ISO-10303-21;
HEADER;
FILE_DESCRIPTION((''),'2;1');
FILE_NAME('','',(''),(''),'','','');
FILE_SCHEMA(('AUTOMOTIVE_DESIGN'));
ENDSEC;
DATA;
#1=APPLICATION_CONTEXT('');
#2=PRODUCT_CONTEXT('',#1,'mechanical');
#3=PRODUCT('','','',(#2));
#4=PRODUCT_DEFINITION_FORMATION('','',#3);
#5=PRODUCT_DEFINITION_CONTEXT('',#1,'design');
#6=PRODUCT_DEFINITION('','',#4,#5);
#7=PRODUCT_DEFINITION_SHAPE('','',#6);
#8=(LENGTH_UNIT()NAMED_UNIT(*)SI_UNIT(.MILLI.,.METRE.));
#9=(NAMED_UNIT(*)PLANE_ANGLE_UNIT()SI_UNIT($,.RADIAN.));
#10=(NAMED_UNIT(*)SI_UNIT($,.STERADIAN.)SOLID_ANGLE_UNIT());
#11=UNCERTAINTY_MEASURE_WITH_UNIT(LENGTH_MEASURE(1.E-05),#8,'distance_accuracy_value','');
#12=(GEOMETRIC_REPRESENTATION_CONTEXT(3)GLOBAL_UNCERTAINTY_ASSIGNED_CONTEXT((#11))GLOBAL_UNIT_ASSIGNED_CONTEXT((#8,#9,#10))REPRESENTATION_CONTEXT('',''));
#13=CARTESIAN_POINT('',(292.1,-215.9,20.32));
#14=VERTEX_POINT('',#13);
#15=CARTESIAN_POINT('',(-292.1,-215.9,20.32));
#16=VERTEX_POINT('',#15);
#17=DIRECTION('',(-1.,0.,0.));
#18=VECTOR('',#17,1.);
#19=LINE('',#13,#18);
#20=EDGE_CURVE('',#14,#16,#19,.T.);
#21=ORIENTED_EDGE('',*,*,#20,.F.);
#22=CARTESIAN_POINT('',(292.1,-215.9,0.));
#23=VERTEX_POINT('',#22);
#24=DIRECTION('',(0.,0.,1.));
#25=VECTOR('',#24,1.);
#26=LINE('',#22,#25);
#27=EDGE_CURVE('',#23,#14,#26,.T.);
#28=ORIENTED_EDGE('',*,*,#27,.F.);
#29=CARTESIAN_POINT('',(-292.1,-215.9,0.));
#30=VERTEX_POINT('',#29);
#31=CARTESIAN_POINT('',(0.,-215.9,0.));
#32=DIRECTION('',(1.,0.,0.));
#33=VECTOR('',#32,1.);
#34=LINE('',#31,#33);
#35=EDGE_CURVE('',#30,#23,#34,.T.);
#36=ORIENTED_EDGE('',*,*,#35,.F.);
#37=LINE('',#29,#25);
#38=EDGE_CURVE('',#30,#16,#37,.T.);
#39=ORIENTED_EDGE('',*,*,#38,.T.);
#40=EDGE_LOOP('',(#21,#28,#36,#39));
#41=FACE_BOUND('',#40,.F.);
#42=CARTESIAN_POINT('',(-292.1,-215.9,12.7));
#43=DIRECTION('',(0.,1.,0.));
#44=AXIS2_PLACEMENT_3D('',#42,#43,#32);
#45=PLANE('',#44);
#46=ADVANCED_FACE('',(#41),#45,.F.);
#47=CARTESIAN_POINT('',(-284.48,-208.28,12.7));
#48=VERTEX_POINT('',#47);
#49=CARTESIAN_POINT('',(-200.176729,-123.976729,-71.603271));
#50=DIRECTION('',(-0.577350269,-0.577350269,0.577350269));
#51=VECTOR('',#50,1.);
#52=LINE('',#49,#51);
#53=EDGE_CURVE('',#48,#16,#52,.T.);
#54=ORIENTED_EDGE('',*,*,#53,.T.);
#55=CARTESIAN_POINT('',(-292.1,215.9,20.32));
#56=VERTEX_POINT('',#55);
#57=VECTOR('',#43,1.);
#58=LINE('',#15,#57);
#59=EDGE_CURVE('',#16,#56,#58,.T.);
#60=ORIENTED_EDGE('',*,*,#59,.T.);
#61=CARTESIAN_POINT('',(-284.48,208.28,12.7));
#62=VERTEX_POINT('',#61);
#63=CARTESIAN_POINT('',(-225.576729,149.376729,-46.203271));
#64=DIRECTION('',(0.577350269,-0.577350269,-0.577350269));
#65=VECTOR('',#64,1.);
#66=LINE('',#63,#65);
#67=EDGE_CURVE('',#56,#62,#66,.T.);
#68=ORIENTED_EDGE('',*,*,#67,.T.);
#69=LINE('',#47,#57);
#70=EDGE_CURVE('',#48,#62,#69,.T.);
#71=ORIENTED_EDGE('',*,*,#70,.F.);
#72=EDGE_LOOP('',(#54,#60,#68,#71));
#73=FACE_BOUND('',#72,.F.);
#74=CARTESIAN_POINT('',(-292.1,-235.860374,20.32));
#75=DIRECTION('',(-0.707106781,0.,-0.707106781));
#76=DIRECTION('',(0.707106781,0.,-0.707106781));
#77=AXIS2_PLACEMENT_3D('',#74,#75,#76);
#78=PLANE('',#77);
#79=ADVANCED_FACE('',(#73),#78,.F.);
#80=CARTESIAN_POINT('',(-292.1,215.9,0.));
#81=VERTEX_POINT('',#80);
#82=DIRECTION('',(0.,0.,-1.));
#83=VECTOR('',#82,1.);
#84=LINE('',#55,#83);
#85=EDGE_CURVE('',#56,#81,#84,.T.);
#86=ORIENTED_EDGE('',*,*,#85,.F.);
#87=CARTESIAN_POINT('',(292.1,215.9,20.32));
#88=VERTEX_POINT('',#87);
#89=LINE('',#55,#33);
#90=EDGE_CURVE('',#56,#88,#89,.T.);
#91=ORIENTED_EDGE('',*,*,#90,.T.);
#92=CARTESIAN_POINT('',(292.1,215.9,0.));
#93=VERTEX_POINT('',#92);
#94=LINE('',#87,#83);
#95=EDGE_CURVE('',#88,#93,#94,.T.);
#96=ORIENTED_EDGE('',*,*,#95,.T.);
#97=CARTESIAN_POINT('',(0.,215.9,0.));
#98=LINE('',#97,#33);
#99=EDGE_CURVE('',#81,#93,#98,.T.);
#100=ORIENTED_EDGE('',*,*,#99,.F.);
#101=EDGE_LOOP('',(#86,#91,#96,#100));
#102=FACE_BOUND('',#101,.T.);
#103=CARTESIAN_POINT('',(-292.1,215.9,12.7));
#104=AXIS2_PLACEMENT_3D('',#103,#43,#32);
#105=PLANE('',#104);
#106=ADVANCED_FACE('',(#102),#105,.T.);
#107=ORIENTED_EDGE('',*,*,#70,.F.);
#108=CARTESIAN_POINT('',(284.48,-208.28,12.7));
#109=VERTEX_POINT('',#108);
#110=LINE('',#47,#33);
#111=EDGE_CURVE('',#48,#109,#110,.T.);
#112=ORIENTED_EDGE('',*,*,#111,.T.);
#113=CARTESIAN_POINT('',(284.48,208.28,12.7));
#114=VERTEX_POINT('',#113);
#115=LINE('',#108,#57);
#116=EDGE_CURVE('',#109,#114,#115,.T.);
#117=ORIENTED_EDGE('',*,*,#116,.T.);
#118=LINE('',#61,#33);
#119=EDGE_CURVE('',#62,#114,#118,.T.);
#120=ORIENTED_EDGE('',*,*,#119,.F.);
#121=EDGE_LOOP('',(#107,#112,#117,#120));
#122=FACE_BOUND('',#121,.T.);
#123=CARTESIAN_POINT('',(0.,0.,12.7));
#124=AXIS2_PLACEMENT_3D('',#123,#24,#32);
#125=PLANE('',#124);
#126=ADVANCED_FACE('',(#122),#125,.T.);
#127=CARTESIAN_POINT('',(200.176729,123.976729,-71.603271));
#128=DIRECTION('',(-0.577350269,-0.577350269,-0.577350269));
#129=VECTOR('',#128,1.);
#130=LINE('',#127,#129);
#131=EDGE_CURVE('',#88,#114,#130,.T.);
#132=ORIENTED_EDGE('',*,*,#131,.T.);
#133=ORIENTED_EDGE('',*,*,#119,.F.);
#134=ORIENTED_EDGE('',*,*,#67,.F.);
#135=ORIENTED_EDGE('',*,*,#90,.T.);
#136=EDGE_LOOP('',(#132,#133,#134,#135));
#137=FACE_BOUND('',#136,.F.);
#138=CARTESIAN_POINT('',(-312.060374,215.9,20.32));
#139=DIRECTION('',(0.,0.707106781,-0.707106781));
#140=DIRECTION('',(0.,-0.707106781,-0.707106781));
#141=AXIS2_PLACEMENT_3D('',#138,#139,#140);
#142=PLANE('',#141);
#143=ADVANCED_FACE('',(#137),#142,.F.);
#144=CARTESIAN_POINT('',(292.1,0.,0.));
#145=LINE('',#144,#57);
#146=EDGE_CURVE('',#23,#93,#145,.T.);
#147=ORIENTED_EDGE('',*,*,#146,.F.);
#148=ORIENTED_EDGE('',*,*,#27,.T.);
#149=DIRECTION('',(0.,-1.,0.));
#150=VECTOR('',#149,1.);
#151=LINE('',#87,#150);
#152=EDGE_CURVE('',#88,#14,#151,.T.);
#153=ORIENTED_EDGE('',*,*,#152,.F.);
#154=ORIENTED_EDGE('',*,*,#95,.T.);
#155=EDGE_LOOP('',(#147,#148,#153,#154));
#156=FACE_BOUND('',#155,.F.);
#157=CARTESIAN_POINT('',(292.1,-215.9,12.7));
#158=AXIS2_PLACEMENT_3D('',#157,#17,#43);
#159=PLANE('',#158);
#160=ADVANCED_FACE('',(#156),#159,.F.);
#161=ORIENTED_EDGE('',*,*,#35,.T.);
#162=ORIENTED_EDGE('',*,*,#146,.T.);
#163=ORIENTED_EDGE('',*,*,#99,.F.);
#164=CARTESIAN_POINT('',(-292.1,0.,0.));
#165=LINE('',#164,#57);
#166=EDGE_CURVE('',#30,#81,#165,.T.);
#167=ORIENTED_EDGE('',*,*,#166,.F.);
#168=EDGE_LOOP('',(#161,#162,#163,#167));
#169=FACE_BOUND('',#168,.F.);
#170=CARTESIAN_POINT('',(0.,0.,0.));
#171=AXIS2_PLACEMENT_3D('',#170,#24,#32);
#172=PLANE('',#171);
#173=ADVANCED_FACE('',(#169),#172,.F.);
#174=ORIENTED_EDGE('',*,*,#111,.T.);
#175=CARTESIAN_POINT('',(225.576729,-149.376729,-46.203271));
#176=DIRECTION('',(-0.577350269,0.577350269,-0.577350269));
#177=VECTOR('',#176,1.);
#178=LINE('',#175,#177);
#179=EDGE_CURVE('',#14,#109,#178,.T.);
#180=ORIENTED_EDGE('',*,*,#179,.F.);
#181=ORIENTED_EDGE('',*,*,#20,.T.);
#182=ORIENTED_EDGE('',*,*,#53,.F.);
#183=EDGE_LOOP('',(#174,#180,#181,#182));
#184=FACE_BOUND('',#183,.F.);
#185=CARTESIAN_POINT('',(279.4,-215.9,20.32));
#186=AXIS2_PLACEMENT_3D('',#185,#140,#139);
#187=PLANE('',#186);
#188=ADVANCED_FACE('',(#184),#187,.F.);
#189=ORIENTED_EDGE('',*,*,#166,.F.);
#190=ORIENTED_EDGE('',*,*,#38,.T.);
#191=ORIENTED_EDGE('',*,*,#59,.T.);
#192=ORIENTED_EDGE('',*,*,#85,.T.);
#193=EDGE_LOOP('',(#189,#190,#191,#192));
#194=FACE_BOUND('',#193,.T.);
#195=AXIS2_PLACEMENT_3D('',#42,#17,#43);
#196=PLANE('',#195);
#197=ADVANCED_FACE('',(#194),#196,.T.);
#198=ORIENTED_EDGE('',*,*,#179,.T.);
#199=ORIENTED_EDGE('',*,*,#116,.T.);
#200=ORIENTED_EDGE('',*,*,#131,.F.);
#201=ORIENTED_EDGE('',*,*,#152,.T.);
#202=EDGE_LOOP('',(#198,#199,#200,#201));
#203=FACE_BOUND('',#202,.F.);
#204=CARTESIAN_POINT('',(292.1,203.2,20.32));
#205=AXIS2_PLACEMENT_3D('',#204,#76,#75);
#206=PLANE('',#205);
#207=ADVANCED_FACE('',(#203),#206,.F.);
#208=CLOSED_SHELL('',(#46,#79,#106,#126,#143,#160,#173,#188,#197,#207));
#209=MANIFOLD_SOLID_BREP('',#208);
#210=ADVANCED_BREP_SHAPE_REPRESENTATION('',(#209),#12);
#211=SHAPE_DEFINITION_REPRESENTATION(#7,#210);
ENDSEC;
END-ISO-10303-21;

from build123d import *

# Parameters (mm, degrees)
F0_W         = 584.2
F0_H         = 431.8
F1_DEPTH     = 12.7
F2_W         = 584.2
F2_H         = 431.8
F2_W_2       = 558.8
F2_H_2       = 406.4
F3_DEPTH     = 7.62
F4_T4_DEPTH  = 558.8
F4_T9_DEPTH  = 406.4
F4_T14_DEPTH = 558.8
F4_T19_DEPTH = 406.4
F4_T25_DEPTH = 439.0603739472
F4_T31_DEPTH = 591.4603739472
F4_T40_DEPTH = 591.4603739472
F4_T46_DEPTH = 439.0603739472
F4_T55_DEPTH = 439.0603739472
F4_T61_DEPTH = 591.4603739472
F4_T70_DEPTH = 439.0603739472
F4_T76_DEPTH = 591.4603739472


# Not quite as in the source:
# - a fillet or chamfer that OpenCascade refuses, or shapes differently, is made with other operations: its cross-section is extruded or revolved along the edge and cut away or added


with BuildPart() as f1:
    # F0 (on Top) → F1 (new body)
    with BuildSketch(Plane.XY):
        Rectangle(F0_W, F0_H)
    extrude(amount=F1_DEPTH)

    # F2 (on face) → F3 (join)
    with BuildSketch(Plane.XY.offset(12.7)):
        Rectangle(F2_W, F2_H)
        Rectangle(F2_W_2, F2_H_2, mode=Mode.SUBTRACT)
    extrude(amount=F3_DEPTH)

    # F4: chamfer of 12.7 on 4 edges, made by hand


with BuildPart() as f4_tool2:
    # F4_s3 → F4_t4 (new body)
    with BuildSketch(Plane.YZ.offset(-279.4)):
        Polygon((215.9, 20.32), (203.2, 7.62), (203.2, 20.32), align=None)
    extrude(amount=F4_T4_DEPTH)

    split(bisect_by=Plane.XY.offset(12.7), keep=Keep.TOP)


with BuildPart() as f1_1:
    add(f1.part)

    # F4_t1: cut F4_tool2
    add(f4_tool2.part, mode=Mode.SUBTRACT)


with BuildPart() as f4_tool7:
    # F4_s8 → F4_t9 (new body)
    with BuildSketch(Plane.XZ.offset(-203.2)):
        Polygon((292.1, 20.32), (279.4, 7.62), (279.4, 20.32), align=None)
    extrude(amount=F4_T9_DEPTH)

    split(bisect_by=Plane.XY.offset(12.7), keep=Keep.TOP)


with BuildPart() as f1_2:
    add(f1_1.part)

    # F4_t6: cut F4_tool7
    add(f4_tool7.part, mode=Mode.SUBTRACT)


with BuildPart() as f4_tool12:
    # F4_s13 → F4_t14 (new body)
    with BuildSketch(Plane.YZ.offset(279.4)):
        Polygon((-215.9, 20.32), (-203.2, 7.62), (-203.2, 20.32), align=None)
    extrude(amount=-F4_T14_DEPTH)

    split(bisect_by=Plane.XY.offset(12.7), keep=Keep.TOP)


with BuildPart() as f1_3:
    add(f1_2.part)

    # F4_t11: cut F4_tool12
    add(f4_tool12.part, mode=Mode.SUBTRACT)


with BuildPart() as f4_tool17:
    # F4_s18 → F4_t19 (new body)
    with BuildSketch(Plane.XZ.offset(203.2)):
        Polygon((-292.1, 20.32), (-279.4, 7.62), (-279.4, 20.32), align=None)
    extrude(amount=-F4_T19_DEPTH)

    split(bisect_by=Plane.XY.offset(12.7), keep=Keep.TOP)


with BuildPart() as f1_4:
    add(f1_3.part)

    # F4_t16: cut F4_tool17
    add(f4_tool17.part, mode=Mode.SUBTRACT)


with BuildPart() as f4_tool23:
    # F4_s24 → F4_t25 (new body)
    with BuildSketch(Plane.XZ.offset(203.2)):
        Polygon((-292.1, 20.32), (-279.4, 7.62), (-279.4, 20.32), align=None)
    extrude(amount=-F4_T25_DEPTH)

    split(bisect_by=Plane.XZ.offset(-215.9), keep=Keep.TOP)

    split(bisect_by=Plane.XY.offset(12.7), keep=Keep.TOP)

    split(bisect_by=Plane.XZ.offset(-203.2), keep=Keep.BOTTOM)


with BuildPart() as f4_tool29:
    # F4_s30 → F4_t31 (new body)
    with BuildSketch(Plane.YZ.offset(-312.0603739472)):
        Polygon((215.9, 20.32), (203.2, 7.62), (203.2, 20.32), align=None)
    extrude(amount=F4_T31_DEPTH)

    split(bisect_by=Plane.XY.offset(12.7), keep=Keep.TOP)

    split(bisect_by=Plane.YZ.offset(-279.4), keep=Keep.BOTTOM)

    split(bisect_by=Plane.YZ.offset(-292.1), keep=Keep.TOP)


with BuildPart() as f4_tool23_1:
    add(f4_tool23.part)

    # F4_t35: intersect F4_tool29
    add(f4_tool29.part, mode=Mode.INTERSECT)


with BuildPart() as f1_5:
    add(f1_4.part)

    # F4_t21: cut F4_tool23
    add(f4_tool23_1.part, mode=Mode.SUBTRACT)


with BuildPart() as f4_tool38:
    # F4_s39 → F4_t40 (new body)
    with BuildSketch(Plane.YZ.offset(-279.4)):
        Polygon((215.9, 20.32), (203.2, 7.62), (203.2, 20.32), align=None)
    extrude(amount=F4_T40_DEPTH)

    split(bisect_by=Plane.YZ.offset(292.1), keep=Keep.BOTTOM)

    split(bisect_by=Plane.XY.offset(12.7), keep=Keep.TOP)

    split(bisect_by=Plane.YZ.offset(279.4), keep=Keep.TOP)


with BuildPart() as f4_tool44:
    # F4_s45 → F4_t46 (new body)
    with BuildSketch(Plane.XZ.offset(-235.8603739472)):
        Polygon((292.1, 20.32), (279.4, 7.62), (279.4, 20.32), align=None)
    extrude(amount=F4_T46_DEPTH)

    split(bisect_by=Plane.XZ.offset(-215.9), keep=Keep.TOP)

    split(bisect_by=Plane.XY.offset(12.7), keep=Keep.TOP)

    split(bisect_by=Plane.XZ.offset(-203.2), keep=Keep.BOTTOM)


with BuildPart() as f4_tool38_1:
    add(f4_tool38.part)

    # F4_t50: intersect F4_tool44
    add(f4_tool44.part, mode=Mode.INTERSECT)


with BuildPart() as f1_6:
    add(f1_5.part)

    # F4_t36: cut F4_tool38
    add(f4_tool38_1.part, mode=Mode.SUBTRACT)


with BuildPart() as f4_tool53:
    # F4_s54 → F4_t55 (new body)
    with BuildSketch(Plane.XZ.offset(-203.2)):
        Polygon((292.1, 20.32), (279.4, 7.62), (279.4, 20.32), align=None)
    extrude(amount=F4_T55_DEPTH)

    split(bisect_by=Plane.XZ.offset(215.9), keep=Keep.BOTTOM)

    split(bisect_by=Plane.XZ.offset(203.2), keep=Keep.TOP)

    split(bisect_by=Plane.XY.offset(12.7), keep=Keep.TOP)


with BuildPart() as f4_tool59:
    # F4_s60 → F4_t61 (new body)
    with BuildSketch(Plane.YZ.offset(312.0603739472)):
        Polygon((-215.9, 20.32), (-203.2, 7.62), (-203.2, 20.32), align=None)
    extrude(amount=-F4_T61_DEPTH)

    split(bisect_by=Plane.YZ.offset(292.1), keep=Keep.BOTTOM)

    split(bisect_by=Plane.XY.offset(12.7), keep=Keep.TOP)

    split(bisect_by=Plane.YZ.offset(279.4), keep=Keep.TOP)


with BuildPart() as f4_tool53_1:
    add(f4_tool53.part)

    # F4_t65: intersect F4_tool59
    add(f4_tool59.part, mode=Mode.INTERSECT)


with BuildPart() as f1_7:
    add(f1_6.part)

    # F4_t51: cut F4_tool53
    add(f4_tool53_1.part, mode=Mode.SUBTRACT)


with BuildPart() as f4_tool68:
    # F4_s69 → F4_t70 (new body)
    with BuildSketch(Plane.XZ.offset(235.8603739472)):
        Polygon((-292.1, 20.32), (-279.4, 7.62), (-279.4, 20.32), align=None)
    extrude(amount=-F4_T70_DEPTH)

    split(bisect_by=Plane.XZ.offset(215.9), keep=Keep.BOTTOM)

    split(bisect_by=Plane.XZ.offset(203.2), keep=Keep.TOP)

    split(bisect_by=Plane.XY.offset(12.7), keep=Keep.TOP)


with BuildPart() as f4_tool74:
    # F4_s75 → F4_t76 (new body)
    with BuildSketch(Plane.YZ.offset(279.4)):
        Polygon((-215.9, 20.32), (-203.2, 7.62), (-203.2, 20.32), align=None)
    extrude(amount=-F4_T76_DEPTH)

    split(bisect_by=Plane.XY.offset(12.7), keep=Keep.TOP)

    split(bisect_by=Plane.YZ.offset(-279.4), keep=Keep.BOTTOM)

    split(bisect_by=Plane.YZ.offset(-292.1), keep=Keep.TOP)


with BuildPart() as f4_tool68_1:
    add(f4_tool68.part)

    # F4_t80: intersect F4_tool74
    add(f4_tool74.part, mode=Mode.INTERSECT)


with BuildPart() as f1_8:
    add(f1_7.part)

    # F4_t66: cut F4_tool68
    add(f4_tool68_1.part, mode=Mode.SUBTRACT)


solid = f1_8.part
